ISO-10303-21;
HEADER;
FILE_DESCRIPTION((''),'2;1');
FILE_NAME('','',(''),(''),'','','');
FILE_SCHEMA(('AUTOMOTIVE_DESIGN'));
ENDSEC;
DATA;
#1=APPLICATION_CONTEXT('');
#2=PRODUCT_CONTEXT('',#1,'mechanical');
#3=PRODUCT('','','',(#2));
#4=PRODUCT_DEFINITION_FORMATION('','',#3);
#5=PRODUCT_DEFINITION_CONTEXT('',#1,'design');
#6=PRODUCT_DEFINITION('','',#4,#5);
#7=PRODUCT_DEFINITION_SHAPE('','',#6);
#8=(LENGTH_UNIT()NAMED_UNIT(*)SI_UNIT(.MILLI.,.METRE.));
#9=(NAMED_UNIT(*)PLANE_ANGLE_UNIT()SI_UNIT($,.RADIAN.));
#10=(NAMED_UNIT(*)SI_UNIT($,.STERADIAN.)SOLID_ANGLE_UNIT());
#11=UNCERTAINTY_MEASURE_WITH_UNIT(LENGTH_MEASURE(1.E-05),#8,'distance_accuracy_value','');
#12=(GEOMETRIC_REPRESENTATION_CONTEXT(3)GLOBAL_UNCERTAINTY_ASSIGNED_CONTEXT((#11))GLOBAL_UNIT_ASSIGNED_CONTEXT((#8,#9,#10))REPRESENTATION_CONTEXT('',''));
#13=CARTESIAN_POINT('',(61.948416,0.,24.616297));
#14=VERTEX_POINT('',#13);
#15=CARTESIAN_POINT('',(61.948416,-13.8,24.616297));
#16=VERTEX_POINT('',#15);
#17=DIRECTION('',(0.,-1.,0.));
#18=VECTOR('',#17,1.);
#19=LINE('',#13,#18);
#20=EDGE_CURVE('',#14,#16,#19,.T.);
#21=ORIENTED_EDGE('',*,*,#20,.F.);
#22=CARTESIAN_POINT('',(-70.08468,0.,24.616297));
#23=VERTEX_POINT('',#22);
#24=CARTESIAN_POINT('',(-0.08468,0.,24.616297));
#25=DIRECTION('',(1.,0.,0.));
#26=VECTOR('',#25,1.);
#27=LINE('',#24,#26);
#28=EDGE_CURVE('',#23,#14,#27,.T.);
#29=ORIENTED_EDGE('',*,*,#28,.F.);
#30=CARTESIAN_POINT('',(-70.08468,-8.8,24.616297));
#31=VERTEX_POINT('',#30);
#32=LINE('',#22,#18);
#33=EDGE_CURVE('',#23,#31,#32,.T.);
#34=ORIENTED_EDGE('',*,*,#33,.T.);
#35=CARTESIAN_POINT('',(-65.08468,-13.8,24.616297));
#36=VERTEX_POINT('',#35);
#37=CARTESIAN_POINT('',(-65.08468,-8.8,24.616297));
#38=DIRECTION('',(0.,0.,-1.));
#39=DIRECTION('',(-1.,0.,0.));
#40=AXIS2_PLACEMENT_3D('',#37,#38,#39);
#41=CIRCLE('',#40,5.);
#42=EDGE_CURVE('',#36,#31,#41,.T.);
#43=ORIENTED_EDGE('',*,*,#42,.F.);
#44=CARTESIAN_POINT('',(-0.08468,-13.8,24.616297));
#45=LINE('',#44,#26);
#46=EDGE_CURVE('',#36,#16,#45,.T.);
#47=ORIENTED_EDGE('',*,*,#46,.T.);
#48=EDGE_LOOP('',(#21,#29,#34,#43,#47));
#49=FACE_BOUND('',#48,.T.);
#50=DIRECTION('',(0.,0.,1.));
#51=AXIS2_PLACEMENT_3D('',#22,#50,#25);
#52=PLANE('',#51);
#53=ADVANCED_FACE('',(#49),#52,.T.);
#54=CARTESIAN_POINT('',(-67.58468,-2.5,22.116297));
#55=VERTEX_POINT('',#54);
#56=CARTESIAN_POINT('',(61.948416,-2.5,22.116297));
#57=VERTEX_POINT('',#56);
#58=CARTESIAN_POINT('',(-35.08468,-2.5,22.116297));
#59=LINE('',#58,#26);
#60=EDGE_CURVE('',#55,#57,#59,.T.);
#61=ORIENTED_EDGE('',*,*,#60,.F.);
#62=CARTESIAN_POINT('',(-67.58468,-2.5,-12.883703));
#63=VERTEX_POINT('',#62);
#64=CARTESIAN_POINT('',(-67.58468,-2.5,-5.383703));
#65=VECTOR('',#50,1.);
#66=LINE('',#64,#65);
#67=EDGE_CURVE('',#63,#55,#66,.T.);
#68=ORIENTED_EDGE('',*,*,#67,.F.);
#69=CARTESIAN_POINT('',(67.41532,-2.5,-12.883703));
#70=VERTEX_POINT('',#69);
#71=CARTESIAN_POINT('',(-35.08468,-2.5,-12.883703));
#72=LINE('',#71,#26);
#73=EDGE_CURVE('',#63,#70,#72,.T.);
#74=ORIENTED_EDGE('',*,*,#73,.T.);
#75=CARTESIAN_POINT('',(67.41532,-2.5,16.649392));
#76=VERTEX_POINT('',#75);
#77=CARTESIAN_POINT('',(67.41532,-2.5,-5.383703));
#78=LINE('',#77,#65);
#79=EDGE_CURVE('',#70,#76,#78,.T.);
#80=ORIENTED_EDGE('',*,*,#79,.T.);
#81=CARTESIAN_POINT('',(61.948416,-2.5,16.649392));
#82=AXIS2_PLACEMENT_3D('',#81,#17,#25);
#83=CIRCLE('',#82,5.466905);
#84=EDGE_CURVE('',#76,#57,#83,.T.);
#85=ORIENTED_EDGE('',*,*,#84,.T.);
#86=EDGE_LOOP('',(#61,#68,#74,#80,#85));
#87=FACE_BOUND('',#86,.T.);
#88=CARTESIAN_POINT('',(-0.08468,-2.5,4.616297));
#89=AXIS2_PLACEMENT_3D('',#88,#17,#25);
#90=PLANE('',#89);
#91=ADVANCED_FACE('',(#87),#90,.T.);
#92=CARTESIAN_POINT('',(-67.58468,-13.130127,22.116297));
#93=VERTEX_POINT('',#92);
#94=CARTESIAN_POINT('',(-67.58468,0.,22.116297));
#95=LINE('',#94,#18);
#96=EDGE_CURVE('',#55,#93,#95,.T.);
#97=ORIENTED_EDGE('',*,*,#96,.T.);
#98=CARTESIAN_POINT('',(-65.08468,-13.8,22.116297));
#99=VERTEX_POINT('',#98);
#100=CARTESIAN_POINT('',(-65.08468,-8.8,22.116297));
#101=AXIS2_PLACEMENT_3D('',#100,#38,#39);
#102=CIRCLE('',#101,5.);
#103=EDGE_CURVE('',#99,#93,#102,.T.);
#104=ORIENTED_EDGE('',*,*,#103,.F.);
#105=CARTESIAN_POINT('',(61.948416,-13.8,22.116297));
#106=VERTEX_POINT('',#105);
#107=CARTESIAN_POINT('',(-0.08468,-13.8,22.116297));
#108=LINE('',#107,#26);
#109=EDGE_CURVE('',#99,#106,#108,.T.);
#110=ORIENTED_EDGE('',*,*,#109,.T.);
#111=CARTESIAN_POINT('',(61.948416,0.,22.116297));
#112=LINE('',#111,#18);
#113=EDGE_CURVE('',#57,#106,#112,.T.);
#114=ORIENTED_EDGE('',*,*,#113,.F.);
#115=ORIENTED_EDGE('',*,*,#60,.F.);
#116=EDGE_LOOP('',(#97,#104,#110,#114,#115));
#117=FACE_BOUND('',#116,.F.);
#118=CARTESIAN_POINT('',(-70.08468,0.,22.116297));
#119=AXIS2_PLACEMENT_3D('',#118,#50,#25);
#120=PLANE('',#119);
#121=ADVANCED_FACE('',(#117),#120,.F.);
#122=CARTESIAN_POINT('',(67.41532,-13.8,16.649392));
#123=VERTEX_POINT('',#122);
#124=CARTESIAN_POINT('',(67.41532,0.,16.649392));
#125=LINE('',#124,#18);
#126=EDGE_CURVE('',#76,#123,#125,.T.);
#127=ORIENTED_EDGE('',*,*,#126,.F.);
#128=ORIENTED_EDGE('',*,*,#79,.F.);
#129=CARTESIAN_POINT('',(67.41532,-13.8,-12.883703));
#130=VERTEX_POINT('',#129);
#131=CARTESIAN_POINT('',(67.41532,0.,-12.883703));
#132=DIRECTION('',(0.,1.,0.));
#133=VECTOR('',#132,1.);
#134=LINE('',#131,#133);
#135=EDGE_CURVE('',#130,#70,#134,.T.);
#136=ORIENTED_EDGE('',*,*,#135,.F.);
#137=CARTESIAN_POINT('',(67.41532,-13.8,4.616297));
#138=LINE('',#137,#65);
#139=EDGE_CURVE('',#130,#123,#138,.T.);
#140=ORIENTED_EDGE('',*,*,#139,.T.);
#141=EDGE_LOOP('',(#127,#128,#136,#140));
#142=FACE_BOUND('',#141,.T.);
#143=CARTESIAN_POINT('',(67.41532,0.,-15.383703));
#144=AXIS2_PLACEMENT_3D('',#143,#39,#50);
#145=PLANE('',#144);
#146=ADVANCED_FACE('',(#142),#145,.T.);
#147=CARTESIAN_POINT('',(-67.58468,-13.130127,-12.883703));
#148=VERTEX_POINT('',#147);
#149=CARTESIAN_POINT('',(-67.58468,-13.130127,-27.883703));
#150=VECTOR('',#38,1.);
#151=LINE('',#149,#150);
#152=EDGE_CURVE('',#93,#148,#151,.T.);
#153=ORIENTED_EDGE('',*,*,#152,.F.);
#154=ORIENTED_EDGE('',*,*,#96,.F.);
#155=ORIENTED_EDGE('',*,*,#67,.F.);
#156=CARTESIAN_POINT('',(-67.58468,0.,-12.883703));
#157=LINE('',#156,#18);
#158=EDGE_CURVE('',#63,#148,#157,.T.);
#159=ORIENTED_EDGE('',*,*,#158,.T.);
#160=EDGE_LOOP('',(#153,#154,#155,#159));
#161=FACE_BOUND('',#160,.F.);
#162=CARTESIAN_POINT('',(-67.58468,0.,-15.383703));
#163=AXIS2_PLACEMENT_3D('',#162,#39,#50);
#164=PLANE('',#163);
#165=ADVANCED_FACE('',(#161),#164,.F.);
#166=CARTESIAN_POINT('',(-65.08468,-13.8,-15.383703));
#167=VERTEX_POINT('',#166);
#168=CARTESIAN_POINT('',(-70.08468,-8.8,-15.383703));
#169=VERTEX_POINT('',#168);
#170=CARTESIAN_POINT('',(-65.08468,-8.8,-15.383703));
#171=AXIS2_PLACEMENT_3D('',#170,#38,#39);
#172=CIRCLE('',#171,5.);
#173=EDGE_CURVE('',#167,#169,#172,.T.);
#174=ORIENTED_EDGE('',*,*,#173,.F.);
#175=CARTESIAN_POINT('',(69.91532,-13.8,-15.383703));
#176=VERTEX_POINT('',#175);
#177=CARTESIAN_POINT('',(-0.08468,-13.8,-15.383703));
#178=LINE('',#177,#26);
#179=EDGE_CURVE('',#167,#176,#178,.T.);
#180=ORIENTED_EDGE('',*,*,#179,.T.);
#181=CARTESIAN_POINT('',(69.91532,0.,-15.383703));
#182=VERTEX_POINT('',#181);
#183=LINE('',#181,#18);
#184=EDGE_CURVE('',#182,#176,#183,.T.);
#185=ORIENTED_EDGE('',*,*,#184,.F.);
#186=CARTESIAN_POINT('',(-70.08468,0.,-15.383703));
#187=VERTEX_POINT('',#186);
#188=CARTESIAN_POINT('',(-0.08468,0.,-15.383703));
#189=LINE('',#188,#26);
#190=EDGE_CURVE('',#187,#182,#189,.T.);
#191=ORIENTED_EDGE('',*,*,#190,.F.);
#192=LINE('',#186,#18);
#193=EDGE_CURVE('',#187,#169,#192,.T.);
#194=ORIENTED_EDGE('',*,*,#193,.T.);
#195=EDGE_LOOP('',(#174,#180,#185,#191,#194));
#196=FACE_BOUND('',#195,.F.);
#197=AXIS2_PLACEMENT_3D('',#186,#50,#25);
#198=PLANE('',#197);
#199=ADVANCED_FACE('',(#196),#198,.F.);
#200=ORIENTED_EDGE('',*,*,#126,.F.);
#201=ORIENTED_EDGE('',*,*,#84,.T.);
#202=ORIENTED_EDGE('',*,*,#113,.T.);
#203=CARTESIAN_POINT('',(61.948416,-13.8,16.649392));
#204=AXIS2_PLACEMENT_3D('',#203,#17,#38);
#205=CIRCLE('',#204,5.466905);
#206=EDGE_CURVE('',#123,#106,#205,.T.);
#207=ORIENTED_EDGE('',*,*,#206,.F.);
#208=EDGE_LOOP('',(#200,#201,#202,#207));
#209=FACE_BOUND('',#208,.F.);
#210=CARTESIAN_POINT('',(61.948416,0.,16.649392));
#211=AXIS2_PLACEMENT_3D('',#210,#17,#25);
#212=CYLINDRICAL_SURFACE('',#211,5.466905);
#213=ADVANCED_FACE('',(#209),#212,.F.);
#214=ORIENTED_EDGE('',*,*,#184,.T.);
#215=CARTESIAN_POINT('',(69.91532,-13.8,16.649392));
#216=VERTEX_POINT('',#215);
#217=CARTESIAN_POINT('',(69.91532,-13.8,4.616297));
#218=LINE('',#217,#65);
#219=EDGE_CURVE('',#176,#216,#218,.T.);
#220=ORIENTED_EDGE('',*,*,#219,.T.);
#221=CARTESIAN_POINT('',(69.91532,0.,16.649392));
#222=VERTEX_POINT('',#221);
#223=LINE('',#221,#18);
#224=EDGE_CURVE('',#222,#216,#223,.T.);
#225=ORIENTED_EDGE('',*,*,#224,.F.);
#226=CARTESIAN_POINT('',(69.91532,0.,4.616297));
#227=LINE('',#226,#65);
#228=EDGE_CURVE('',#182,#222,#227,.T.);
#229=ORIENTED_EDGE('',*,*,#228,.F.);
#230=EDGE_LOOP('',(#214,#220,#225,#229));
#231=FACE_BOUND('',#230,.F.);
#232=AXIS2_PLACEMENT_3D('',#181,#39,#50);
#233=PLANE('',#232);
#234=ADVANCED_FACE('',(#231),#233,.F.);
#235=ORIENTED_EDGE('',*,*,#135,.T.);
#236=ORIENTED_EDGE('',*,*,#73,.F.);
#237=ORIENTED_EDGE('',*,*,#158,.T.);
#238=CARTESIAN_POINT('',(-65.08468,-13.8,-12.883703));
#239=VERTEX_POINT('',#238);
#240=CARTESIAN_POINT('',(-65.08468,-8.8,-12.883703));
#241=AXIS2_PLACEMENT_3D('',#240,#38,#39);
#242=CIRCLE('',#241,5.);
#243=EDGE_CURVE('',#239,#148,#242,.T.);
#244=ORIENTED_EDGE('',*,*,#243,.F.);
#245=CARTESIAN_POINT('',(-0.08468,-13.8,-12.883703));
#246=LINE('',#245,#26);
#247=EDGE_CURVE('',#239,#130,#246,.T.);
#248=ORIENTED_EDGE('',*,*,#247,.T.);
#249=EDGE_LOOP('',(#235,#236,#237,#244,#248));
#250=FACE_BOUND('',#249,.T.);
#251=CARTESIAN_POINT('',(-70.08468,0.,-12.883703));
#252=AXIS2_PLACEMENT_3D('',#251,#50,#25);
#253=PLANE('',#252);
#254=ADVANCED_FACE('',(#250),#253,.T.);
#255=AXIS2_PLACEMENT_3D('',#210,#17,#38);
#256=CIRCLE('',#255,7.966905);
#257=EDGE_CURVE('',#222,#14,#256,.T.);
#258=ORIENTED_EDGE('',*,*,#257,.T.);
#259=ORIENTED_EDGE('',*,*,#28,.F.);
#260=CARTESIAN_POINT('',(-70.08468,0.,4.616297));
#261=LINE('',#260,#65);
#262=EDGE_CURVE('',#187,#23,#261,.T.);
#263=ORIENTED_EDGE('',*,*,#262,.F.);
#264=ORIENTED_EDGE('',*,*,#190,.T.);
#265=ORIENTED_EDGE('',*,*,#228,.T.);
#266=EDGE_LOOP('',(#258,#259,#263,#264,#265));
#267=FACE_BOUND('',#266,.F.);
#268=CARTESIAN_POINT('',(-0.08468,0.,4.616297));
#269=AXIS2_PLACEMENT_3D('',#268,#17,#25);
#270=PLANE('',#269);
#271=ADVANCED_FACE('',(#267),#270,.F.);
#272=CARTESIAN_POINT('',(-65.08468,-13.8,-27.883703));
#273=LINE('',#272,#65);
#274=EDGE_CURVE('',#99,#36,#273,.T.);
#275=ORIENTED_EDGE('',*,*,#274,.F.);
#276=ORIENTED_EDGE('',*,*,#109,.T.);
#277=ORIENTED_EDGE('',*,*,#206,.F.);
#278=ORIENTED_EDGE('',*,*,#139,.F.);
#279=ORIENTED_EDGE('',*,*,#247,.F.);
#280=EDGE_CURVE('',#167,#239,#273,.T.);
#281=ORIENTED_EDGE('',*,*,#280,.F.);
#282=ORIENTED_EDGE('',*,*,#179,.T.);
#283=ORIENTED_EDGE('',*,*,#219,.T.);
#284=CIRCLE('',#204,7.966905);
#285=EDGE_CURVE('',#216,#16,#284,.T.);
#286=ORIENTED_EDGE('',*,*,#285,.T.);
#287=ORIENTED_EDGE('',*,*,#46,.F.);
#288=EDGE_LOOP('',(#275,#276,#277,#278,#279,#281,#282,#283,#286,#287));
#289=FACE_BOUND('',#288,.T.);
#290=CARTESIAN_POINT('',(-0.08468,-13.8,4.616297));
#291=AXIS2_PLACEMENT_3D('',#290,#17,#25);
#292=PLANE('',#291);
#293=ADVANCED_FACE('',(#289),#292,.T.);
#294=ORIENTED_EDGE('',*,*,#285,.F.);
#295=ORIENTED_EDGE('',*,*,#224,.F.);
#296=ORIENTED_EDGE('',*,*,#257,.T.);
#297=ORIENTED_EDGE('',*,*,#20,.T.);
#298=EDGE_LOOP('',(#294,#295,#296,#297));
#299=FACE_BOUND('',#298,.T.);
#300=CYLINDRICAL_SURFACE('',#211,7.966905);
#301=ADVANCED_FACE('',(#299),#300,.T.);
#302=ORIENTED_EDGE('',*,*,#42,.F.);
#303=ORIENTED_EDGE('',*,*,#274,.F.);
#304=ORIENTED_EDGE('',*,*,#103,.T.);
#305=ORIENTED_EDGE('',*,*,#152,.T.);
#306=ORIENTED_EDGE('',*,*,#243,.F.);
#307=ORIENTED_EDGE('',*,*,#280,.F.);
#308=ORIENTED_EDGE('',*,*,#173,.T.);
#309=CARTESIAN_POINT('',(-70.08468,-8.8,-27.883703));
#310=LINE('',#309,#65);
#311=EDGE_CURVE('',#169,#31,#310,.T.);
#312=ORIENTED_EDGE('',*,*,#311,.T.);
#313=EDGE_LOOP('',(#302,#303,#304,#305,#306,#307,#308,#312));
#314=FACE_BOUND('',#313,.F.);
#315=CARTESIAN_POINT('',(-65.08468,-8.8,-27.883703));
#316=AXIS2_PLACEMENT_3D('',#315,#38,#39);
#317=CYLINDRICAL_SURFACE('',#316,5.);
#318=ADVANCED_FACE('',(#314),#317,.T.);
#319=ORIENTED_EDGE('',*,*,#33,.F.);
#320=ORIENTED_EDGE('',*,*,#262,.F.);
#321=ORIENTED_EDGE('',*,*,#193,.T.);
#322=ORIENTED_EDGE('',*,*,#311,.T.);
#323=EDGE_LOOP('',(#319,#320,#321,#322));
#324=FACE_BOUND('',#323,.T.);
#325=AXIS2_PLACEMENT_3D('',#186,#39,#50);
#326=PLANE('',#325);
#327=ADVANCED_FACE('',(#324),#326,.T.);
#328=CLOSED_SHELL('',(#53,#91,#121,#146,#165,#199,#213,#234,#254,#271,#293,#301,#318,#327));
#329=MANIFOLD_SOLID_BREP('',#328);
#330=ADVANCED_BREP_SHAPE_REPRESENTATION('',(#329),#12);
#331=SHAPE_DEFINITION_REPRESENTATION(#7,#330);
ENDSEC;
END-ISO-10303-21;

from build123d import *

# Parameters (mm, degrees)
F0_W        = 140
F0_H        = 40
F1_DEPTH    = 13.8
F2_R        = 7.9669047558
F3_T        = -2.5
F4_T1_DEPTH = 65


# Not quite as in the source:
# - a fillet or chamfer that OpenCascade refuses, or shapes differently, is made with other operations: its cross-section is extruded or revolved along the edge and cut away or added


with BuildPart() as f1:
    # F0 (on Front) → F1 (new body)
    with BuildSketch(Plane.XZ):
        with Locations((-0.0846795738, 4.6162967879)):
            Rectangle(F0_W, F0_H)
    extrude(amount=F1_DEPTH)

    # F2
    f2_edges = [f1.edges().sort_by_distance(p)[0] for p in [
        (69.91532, -6.9, 24.616297),
    ]]
    fillet(f2_edges, radius=F2_R)

    # F3
    f3_openings = [f1.faces().sort_by_distance(p)[0] for p in [
        (-0.25102, -13.8, 4.57187),
    ]]
    offset(amount=F3_T, openings=f3_openings)

    # F4: fillet of radius 5 on 1 edges, made by hand

    # F4_s2 → F4_t1 (cut)
    with BuildSketch(Plane.XY.offset(-27.8837032121)):
        with BuildLine():
            ThreePointArc((-70.0846795738, -8.8), (-68.6202134797, -12.3355339059), (-65.0846795738, -13.8))
            Line((-65.0846795738, -13.8), (-70.0846795738, -13.8))
            Line((-70.0846795738, -13.8), (-70.0846795738, -8.8))
        make_face()
    extrude(amount=F4_T1_DEPTH, mode=Mode.SUBTRACT)


solid = f1.part
